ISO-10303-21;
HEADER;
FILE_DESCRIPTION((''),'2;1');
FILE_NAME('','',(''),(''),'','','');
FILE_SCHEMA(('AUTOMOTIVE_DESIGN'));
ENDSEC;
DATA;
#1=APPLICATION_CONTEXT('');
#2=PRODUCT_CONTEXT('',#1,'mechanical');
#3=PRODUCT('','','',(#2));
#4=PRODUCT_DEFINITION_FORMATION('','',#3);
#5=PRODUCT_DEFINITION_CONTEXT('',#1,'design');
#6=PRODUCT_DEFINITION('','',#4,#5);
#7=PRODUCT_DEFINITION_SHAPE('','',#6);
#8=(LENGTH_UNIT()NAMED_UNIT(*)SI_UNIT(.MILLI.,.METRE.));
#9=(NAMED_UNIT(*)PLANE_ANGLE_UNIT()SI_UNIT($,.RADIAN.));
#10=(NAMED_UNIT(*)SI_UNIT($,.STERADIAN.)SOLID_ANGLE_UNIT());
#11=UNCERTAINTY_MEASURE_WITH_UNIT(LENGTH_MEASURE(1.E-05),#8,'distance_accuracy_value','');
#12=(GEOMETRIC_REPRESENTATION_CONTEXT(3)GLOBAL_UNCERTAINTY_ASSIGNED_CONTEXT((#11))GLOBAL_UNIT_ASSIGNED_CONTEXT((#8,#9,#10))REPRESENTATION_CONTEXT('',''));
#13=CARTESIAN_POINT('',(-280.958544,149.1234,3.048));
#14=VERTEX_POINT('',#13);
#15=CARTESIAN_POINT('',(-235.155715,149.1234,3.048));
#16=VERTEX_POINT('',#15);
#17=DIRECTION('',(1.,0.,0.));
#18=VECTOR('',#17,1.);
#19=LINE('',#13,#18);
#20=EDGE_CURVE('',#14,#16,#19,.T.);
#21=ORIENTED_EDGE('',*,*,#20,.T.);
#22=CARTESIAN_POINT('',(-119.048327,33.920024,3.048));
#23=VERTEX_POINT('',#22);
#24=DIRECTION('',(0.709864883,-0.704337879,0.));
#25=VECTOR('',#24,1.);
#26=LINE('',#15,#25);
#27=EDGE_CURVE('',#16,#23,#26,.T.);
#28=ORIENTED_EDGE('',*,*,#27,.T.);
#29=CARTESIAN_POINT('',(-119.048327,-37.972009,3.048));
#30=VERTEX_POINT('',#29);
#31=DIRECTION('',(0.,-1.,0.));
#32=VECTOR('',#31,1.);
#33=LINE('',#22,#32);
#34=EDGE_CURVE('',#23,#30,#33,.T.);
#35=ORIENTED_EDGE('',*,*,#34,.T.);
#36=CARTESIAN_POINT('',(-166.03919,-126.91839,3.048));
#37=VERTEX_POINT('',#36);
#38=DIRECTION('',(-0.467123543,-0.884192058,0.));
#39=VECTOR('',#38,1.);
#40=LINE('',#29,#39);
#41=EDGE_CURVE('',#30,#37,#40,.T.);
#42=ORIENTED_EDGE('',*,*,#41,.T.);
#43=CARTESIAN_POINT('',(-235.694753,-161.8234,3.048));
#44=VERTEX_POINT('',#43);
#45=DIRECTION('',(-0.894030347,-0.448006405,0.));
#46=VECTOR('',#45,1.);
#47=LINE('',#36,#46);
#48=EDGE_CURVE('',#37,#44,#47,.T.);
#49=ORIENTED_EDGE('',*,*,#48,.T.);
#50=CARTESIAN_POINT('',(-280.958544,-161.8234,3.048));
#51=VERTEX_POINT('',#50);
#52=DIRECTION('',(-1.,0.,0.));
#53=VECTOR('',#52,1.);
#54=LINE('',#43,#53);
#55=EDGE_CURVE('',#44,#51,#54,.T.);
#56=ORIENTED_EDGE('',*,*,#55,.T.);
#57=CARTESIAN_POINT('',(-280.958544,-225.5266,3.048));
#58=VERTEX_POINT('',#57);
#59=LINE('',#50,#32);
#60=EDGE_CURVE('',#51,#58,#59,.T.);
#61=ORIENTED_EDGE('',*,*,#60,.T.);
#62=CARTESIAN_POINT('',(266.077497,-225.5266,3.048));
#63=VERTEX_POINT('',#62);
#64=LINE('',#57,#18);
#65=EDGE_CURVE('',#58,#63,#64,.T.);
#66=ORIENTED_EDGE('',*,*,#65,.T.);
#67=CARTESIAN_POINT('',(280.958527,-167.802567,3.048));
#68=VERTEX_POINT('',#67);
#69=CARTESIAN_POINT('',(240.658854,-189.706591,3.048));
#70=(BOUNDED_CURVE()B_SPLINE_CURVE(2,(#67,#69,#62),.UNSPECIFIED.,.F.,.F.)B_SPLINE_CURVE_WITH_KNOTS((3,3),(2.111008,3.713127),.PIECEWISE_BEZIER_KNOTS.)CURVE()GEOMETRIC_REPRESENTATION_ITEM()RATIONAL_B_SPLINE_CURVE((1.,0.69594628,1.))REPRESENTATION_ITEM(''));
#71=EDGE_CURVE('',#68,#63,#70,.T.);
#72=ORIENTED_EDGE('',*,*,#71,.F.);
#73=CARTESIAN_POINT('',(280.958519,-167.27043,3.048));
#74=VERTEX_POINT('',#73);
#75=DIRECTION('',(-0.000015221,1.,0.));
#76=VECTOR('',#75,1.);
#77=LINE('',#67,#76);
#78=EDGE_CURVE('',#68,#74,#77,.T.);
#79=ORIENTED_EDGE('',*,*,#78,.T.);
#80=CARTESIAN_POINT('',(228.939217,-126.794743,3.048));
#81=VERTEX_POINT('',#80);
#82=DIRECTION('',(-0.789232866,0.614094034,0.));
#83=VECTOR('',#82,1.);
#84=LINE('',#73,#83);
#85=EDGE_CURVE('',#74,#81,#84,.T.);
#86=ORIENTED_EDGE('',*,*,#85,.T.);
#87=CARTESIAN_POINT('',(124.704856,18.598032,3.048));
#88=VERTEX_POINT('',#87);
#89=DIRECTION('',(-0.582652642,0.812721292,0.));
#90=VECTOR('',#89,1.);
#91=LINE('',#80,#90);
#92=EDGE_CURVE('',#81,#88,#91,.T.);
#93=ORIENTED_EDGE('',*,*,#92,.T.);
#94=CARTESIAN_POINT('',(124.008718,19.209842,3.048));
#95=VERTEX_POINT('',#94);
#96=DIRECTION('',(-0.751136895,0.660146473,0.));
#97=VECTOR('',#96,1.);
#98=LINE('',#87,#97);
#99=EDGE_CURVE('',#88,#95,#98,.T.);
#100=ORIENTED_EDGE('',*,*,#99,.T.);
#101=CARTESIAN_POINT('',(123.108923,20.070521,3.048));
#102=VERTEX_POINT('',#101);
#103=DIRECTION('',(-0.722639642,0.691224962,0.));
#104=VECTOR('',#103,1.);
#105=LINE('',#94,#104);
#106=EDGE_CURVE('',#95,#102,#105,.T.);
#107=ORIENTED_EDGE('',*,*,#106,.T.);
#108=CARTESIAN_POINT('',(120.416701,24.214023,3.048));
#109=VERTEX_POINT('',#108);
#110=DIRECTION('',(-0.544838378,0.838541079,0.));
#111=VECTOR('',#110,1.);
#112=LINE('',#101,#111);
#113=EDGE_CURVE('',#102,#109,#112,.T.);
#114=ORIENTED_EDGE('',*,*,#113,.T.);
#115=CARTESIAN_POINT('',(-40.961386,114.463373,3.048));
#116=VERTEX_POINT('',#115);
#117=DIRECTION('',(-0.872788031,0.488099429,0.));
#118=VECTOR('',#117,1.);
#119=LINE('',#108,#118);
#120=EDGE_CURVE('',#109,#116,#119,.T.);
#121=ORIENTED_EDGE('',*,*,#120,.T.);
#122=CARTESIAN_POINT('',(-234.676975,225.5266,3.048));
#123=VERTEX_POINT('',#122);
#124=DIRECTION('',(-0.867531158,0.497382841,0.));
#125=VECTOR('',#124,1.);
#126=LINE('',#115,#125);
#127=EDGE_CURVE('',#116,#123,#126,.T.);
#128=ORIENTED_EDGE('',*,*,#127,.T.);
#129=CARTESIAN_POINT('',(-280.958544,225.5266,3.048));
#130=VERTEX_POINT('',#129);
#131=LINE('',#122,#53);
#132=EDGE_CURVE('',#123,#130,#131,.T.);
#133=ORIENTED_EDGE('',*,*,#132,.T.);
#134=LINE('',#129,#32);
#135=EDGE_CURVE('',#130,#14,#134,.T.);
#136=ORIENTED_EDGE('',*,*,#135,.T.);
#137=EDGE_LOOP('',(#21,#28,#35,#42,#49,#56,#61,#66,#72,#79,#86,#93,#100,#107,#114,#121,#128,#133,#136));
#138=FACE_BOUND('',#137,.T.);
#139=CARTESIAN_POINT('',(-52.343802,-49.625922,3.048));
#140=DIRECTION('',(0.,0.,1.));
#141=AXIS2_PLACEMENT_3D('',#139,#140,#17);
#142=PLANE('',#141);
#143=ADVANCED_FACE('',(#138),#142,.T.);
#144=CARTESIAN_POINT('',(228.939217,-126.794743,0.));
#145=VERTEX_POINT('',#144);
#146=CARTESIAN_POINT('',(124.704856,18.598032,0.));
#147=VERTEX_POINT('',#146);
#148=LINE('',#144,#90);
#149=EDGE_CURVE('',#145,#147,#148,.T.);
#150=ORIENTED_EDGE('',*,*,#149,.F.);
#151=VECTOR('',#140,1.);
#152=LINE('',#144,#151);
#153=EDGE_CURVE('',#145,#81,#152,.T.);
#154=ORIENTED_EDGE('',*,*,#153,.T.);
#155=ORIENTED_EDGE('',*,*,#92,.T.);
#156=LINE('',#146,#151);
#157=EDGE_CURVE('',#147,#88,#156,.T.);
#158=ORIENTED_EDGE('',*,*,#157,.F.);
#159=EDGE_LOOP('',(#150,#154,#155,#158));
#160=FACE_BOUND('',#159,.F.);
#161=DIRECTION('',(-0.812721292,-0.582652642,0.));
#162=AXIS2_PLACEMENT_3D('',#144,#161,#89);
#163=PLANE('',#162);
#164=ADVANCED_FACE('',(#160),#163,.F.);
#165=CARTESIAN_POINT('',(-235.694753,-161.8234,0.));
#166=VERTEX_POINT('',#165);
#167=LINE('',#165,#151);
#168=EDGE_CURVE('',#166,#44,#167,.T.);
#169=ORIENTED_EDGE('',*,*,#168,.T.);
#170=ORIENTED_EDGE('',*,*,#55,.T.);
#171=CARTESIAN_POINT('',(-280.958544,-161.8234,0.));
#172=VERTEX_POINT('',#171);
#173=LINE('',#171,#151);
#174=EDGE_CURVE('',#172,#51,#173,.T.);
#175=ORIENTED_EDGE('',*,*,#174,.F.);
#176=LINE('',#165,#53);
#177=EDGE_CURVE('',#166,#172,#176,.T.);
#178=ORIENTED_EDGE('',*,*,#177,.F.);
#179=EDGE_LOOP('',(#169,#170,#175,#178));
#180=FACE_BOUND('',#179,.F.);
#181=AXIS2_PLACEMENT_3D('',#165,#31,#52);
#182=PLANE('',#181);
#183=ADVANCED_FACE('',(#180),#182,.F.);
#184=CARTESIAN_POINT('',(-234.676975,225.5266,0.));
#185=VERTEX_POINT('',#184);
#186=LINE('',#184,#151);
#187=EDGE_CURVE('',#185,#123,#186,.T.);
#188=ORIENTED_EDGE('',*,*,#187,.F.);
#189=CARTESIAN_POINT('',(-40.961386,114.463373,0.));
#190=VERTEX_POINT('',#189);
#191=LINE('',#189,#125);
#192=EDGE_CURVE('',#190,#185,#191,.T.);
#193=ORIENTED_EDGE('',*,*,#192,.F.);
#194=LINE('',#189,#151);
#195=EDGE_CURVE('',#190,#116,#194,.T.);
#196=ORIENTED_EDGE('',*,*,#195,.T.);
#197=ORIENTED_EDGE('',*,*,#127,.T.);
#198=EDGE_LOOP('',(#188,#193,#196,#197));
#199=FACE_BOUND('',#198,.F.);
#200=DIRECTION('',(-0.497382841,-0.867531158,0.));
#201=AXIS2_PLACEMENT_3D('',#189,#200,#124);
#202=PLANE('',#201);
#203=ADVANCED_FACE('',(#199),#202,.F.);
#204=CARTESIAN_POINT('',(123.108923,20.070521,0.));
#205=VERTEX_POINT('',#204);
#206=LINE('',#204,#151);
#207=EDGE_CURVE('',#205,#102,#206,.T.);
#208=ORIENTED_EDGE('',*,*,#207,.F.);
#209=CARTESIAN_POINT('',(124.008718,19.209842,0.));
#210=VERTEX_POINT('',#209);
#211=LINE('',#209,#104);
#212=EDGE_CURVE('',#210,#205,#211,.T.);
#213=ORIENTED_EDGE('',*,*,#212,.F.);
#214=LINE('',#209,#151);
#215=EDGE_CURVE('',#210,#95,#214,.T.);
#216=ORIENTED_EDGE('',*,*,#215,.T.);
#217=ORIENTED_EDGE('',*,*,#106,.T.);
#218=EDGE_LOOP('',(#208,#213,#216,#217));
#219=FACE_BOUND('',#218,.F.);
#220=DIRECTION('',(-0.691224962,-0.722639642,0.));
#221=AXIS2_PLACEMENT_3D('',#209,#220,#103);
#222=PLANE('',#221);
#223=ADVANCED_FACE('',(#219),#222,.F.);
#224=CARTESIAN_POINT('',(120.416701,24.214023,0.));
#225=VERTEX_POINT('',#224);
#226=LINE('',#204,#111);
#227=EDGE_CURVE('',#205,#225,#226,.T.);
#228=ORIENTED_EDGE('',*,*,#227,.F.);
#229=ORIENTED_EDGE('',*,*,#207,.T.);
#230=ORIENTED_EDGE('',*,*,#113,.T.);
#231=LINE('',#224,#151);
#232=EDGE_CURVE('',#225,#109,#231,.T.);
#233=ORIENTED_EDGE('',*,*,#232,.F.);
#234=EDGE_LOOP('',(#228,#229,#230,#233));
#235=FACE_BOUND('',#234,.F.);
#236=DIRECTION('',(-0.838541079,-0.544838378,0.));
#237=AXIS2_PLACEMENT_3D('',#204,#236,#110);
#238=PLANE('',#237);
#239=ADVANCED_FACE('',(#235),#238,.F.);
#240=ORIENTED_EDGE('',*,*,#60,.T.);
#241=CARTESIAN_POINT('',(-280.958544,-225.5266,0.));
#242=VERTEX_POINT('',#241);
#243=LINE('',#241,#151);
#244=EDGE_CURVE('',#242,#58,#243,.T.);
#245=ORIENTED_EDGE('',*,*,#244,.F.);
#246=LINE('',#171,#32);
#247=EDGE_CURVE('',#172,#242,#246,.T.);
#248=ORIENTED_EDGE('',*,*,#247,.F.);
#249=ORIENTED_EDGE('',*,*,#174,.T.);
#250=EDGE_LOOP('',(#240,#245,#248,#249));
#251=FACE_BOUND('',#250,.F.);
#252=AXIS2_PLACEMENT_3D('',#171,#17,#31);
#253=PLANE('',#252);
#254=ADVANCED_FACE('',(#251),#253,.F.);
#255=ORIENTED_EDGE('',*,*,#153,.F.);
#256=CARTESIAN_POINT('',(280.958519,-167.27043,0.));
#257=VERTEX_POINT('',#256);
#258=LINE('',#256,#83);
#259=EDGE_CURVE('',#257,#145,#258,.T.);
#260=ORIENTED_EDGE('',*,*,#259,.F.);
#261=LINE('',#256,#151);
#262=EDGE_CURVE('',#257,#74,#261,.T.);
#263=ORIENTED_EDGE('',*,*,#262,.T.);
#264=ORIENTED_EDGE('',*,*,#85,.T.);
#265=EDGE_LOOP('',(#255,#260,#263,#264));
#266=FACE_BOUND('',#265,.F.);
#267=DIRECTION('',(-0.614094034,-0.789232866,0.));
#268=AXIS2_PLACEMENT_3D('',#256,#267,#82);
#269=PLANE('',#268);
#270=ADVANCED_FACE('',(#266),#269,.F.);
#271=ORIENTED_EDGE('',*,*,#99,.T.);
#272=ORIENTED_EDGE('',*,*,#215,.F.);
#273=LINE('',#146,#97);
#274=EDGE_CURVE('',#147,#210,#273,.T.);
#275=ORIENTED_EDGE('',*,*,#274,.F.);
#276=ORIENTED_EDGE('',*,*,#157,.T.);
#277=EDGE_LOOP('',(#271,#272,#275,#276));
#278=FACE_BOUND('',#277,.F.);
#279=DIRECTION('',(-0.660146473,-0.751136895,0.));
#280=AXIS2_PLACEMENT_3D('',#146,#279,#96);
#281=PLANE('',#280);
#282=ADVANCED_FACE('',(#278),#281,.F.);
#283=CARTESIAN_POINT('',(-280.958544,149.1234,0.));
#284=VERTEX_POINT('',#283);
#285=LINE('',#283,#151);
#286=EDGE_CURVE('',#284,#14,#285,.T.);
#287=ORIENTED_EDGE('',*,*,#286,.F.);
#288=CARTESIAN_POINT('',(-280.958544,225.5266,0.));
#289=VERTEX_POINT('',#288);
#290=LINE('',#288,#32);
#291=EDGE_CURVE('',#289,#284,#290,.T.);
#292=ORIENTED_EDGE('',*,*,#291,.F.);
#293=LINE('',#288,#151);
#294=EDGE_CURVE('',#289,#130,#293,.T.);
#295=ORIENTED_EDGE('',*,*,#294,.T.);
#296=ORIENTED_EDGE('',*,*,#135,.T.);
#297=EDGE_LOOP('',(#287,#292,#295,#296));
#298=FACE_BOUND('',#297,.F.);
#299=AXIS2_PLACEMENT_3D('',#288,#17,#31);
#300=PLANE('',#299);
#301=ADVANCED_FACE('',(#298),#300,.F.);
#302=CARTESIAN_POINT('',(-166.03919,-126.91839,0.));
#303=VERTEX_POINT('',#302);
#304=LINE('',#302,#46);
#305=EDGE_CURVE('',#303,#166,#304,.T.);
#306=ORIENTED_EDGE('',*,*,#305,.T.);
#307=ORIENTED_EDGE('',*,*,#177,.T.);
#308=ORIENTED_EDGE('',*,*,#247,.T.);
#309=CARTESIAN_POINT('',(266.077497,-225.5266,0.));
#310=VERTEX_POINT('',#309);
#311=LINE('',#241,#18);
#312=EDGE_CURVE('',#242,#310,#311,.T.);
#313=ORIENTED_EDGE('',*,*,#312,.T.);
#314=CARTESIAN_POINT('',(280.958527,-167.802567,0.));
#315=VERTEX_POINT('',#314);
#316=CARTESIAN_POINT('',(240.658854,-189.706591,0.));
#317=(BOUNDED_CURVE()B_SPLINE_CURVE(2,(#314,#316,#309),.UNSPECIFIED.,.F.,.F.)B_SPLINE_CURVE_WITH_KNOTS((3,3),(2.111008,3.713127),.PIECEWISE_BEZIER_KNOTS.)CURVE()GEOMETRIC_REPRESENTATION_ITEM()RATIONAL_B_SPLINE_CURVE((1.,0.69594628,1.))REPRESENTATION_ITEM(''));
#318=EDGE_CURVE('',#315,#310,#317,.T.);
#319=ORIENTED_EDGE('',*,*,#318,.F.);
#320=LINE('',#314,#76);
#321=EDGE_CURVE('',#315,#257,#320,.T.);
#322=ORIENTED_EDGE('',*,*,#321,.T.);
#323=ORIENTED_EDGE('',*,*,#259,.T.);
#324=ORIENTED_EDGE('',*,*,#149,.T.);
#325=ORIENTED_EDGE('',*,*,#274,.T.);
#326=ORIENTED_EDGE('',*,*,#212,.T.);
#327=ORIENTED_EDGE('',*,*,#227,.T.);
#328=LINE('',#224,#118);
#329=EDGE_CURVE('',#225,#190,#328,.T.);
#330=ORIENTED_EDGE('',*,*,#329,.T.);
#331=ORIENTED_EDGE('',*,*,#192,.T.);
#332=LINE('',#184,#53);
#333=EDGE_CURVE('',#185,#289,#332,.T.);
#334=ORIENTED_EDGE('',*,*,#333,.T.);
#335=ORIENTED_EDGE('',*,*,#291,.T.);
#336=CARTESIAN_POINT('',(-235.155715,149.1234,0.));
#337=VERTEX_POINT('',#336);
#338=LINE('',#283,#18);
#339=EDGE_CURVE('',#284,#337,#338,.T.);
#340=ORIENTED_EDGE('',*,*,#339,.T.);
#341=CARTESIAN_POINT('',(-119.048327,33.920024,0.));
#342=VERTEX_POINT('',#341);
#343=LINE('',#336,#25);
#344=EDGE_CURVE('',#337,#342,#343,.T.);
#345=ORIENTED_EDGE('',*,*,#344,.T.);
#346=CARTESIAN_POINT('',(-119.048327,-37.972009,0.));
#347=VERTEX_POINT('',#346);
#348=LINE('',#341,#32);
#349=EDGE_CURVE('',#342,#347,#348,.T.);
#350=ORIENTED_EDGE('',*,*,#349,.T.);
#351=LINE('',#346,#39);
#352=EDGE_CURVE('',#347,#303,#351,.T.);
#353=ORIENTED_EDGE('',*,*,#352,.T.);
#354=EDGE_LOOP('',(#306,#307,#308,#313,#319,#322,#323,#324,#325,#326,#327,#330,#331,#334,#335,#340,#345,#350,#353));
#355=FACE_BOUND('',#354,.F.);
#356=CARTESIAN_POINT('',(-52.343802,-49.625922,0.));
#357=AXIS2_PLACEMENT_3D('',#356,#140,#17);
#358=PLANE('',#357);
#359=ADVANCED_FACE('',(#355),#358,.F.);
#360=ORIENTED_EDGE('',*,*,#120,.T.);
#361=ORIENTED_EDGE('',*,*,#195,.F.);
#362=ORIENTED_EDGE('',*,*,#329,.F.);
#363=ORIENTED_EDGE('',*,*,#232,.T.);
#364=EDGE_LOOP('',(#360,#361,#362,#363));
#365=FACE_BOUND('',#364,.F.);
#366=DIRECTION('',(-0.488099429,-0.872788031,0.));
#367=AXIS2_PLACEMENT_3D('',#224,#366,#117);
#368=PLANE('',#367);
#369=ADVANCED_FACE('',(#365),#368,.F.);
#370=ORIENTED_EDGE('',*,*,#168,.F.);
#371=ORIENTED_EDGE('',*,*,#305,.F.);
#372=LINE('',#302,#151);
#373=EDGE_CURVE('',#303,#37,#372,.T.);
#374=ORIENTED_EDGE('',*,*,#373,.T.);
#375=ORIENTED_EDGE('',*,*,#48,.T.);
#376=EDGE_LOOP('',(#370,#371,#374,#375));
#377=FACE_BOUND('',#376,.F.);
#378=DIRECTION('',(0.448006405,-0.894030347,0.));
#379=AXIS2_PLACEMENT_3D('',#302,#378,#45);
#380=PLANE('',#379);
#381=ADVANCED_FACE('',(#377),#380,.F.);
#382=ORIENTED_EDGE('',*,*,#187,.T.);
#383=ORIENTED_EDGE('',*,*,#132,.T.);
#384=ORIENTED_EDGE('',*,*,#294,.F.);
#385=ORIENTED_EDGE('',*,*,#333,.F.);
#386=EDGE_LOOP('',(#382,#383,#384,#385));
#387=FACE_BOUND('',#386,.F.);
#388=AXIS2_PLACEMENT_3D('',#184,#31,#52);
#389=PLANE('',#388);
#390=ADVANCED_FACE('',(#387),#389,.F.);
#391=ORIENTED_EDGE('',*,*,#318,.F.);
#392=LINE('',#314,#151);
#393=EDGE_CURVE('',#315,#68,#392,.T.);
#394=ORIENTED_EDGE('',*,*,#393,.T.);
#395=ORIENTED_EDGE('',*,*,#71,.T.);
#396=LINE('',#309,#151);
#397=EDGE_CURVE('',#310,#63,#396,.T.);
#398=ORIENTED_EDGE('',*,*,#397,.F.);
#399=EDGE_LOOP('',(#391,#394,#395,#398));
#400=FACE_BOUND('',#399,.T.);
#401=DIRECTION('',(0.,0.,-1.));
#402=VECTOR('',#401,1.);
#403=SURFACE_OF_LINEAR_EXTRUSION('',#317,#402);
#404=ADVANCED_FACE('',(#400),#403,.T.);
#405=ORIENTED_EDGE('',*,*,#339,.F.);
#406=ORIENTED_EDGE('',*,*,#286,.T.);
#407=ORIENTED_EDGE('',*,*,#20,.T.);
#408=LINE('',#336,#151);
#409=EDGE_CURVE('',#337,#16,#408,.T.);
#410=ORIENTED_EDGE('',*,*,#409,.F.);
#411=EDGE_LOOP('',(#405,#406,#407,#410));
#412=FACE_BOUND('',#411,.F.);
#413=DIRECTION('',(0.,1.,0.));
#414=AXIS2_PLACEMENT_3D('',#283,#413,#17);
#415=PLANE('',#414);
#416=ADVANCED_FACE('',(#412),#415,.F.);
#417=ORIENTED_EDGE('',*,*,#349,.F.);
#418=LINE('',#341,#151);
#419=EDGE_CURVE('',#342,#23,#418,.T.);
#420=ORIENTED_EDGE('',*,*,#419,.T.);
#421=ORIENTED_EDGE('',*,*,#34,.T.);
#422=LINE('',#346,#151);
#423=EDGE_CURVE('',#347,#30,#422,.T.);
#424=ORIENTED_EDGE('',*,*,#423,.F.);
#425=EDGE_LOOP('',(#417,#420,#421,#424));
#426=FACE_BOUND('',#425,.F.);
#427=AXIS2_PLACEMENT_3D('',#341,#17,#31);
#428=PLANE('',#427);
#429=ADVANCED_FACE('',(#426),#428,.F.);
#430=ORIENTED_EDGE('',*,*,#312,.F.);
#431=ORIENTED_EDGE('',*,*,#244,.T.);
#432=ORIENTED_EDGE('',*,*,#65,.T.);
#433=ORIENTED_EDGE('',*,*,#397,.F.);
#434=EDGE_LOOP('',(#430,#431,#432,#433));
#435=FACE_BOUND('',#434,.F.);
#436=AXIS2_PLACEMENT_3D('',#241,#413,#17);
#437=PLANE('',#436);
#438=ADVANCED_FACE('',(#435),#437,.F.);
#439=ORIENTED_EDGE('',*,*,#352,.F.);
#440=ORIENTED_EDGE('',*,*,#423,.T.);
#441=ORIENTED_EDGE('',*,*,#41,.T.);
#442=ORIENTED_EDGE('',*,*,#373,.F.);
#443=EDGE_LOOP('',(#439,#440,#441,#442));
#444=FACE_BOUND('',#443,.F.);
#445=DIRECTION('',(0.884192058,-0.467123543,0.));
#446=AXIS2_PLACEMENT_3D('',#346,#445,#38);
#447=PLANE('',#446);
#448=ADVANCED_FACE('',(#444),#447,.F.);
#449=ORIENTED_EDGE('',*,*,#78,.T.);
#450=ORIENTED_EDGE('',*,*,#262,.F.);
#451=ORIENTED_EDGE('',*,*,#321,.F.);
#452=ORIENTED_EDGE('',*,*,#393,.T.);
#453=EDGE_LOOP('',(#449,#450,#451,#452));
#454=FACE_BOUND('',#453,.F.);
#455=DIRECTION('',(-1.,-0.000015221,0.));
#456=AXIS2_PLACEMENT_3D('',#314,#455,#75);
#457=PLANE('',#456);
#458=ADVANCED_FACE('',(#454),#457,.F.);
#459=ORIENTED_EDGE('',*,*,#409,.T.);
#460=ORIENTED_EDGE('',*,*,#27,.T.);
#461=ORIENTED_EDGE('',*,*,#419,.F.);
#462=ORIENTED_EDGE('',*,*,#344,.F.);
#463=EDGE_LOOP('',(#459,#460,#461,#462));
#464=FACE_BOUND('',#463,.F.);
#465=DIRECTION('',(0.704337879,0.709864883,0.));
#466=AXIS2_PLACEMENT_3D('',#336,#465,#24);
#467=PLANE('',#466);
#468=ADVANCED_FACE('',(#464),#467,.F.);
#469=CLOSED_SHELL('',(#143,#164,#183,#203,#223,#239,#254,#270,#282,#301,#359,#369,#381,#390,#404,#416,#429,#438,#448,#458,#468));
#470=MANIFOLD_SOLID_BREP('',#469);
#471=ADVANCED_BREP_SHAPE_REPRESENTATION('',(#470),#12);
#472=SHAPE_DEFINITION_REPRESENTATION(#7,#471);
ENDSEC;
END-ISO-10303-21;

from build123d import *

# Parameters (mm, degrees)
F1_DEPTH = 3.048


# Not quite as in the source:
# - ends of sketch curves that miss each other by under 0.0002 mm in the source are joined


with BuildPart() as f1:
    # F0 (on Top) → F1 (new body)
    with BuildSketch(Plane.XY):
        with BuildLine():
            Line((-234.6769754, 225.5266), (-280.958544, 225.5266))
            Line((-280.958544, 225.5266), (-280.958544, 149.1234))
            Line((-280.958544, 149.1234), (-235.1557146, 149.1234))
            Line((-235.1557146, 149.1234), (-119.0483268, 33.9200236))
            Line((-119.0483268, 33.9200236), (-119.0483268, -37.9720094))
            Line((-119.0483268, -37.9720094), (-166.0391904, -126.9183898))
            Line((-166.0391904, -126.9183898), (-235.6947534, -161.8234))
            Line((-235.6947534, -161.8234), (-280.958544, -161.8234))
            Line((-280.958544, -161.8234), (-280.958544, -225.5266))
            Line((-280.958544, -225.5266), (123.1089232, -225.5266))
            Line((123.1089232, -225.5266), (124.704856, -225.5266))
            Line((124.704856, -225.5266), (266.0774968, -225.5266))
            add(Edge.make_bspline(
                [(280.9585266998, -167.802566879), (240.6588540152, -189.7065906201), (266.0774968, -225.5266)],
                knots=[2.111008, 2.111008, 2.111008, 3.713127, 3.713127, 3.713127], degree=2, weights=[1, 0.6959462797, 1]))
            Line((280.9585266998, -167.802566879), (280.9585186, -167.27043))
            Line((280.9585186, -167.27043), (228.939217, -126.7947426))
            Line((228.939217, -126.7947426), (124.704856, 18.5980324))
            Line((124.704856, 18.5980324), (124.0087182, 19.2098422))
            Line((124.0087182, 19.2098422), (123.1089232, 20.0705212))
            Line((123.1089232, 20.0705212), (120.416701, 24.2140232))
            Line((120.416701, 24.2140232), (-40.9613862, 114.4633728))
            Line((-40.9613862, 114.4633728), (-234.6769754, 225.5266))
        make_face()
    extrude(amount=F1_DEPTH)


solid = f1.part
